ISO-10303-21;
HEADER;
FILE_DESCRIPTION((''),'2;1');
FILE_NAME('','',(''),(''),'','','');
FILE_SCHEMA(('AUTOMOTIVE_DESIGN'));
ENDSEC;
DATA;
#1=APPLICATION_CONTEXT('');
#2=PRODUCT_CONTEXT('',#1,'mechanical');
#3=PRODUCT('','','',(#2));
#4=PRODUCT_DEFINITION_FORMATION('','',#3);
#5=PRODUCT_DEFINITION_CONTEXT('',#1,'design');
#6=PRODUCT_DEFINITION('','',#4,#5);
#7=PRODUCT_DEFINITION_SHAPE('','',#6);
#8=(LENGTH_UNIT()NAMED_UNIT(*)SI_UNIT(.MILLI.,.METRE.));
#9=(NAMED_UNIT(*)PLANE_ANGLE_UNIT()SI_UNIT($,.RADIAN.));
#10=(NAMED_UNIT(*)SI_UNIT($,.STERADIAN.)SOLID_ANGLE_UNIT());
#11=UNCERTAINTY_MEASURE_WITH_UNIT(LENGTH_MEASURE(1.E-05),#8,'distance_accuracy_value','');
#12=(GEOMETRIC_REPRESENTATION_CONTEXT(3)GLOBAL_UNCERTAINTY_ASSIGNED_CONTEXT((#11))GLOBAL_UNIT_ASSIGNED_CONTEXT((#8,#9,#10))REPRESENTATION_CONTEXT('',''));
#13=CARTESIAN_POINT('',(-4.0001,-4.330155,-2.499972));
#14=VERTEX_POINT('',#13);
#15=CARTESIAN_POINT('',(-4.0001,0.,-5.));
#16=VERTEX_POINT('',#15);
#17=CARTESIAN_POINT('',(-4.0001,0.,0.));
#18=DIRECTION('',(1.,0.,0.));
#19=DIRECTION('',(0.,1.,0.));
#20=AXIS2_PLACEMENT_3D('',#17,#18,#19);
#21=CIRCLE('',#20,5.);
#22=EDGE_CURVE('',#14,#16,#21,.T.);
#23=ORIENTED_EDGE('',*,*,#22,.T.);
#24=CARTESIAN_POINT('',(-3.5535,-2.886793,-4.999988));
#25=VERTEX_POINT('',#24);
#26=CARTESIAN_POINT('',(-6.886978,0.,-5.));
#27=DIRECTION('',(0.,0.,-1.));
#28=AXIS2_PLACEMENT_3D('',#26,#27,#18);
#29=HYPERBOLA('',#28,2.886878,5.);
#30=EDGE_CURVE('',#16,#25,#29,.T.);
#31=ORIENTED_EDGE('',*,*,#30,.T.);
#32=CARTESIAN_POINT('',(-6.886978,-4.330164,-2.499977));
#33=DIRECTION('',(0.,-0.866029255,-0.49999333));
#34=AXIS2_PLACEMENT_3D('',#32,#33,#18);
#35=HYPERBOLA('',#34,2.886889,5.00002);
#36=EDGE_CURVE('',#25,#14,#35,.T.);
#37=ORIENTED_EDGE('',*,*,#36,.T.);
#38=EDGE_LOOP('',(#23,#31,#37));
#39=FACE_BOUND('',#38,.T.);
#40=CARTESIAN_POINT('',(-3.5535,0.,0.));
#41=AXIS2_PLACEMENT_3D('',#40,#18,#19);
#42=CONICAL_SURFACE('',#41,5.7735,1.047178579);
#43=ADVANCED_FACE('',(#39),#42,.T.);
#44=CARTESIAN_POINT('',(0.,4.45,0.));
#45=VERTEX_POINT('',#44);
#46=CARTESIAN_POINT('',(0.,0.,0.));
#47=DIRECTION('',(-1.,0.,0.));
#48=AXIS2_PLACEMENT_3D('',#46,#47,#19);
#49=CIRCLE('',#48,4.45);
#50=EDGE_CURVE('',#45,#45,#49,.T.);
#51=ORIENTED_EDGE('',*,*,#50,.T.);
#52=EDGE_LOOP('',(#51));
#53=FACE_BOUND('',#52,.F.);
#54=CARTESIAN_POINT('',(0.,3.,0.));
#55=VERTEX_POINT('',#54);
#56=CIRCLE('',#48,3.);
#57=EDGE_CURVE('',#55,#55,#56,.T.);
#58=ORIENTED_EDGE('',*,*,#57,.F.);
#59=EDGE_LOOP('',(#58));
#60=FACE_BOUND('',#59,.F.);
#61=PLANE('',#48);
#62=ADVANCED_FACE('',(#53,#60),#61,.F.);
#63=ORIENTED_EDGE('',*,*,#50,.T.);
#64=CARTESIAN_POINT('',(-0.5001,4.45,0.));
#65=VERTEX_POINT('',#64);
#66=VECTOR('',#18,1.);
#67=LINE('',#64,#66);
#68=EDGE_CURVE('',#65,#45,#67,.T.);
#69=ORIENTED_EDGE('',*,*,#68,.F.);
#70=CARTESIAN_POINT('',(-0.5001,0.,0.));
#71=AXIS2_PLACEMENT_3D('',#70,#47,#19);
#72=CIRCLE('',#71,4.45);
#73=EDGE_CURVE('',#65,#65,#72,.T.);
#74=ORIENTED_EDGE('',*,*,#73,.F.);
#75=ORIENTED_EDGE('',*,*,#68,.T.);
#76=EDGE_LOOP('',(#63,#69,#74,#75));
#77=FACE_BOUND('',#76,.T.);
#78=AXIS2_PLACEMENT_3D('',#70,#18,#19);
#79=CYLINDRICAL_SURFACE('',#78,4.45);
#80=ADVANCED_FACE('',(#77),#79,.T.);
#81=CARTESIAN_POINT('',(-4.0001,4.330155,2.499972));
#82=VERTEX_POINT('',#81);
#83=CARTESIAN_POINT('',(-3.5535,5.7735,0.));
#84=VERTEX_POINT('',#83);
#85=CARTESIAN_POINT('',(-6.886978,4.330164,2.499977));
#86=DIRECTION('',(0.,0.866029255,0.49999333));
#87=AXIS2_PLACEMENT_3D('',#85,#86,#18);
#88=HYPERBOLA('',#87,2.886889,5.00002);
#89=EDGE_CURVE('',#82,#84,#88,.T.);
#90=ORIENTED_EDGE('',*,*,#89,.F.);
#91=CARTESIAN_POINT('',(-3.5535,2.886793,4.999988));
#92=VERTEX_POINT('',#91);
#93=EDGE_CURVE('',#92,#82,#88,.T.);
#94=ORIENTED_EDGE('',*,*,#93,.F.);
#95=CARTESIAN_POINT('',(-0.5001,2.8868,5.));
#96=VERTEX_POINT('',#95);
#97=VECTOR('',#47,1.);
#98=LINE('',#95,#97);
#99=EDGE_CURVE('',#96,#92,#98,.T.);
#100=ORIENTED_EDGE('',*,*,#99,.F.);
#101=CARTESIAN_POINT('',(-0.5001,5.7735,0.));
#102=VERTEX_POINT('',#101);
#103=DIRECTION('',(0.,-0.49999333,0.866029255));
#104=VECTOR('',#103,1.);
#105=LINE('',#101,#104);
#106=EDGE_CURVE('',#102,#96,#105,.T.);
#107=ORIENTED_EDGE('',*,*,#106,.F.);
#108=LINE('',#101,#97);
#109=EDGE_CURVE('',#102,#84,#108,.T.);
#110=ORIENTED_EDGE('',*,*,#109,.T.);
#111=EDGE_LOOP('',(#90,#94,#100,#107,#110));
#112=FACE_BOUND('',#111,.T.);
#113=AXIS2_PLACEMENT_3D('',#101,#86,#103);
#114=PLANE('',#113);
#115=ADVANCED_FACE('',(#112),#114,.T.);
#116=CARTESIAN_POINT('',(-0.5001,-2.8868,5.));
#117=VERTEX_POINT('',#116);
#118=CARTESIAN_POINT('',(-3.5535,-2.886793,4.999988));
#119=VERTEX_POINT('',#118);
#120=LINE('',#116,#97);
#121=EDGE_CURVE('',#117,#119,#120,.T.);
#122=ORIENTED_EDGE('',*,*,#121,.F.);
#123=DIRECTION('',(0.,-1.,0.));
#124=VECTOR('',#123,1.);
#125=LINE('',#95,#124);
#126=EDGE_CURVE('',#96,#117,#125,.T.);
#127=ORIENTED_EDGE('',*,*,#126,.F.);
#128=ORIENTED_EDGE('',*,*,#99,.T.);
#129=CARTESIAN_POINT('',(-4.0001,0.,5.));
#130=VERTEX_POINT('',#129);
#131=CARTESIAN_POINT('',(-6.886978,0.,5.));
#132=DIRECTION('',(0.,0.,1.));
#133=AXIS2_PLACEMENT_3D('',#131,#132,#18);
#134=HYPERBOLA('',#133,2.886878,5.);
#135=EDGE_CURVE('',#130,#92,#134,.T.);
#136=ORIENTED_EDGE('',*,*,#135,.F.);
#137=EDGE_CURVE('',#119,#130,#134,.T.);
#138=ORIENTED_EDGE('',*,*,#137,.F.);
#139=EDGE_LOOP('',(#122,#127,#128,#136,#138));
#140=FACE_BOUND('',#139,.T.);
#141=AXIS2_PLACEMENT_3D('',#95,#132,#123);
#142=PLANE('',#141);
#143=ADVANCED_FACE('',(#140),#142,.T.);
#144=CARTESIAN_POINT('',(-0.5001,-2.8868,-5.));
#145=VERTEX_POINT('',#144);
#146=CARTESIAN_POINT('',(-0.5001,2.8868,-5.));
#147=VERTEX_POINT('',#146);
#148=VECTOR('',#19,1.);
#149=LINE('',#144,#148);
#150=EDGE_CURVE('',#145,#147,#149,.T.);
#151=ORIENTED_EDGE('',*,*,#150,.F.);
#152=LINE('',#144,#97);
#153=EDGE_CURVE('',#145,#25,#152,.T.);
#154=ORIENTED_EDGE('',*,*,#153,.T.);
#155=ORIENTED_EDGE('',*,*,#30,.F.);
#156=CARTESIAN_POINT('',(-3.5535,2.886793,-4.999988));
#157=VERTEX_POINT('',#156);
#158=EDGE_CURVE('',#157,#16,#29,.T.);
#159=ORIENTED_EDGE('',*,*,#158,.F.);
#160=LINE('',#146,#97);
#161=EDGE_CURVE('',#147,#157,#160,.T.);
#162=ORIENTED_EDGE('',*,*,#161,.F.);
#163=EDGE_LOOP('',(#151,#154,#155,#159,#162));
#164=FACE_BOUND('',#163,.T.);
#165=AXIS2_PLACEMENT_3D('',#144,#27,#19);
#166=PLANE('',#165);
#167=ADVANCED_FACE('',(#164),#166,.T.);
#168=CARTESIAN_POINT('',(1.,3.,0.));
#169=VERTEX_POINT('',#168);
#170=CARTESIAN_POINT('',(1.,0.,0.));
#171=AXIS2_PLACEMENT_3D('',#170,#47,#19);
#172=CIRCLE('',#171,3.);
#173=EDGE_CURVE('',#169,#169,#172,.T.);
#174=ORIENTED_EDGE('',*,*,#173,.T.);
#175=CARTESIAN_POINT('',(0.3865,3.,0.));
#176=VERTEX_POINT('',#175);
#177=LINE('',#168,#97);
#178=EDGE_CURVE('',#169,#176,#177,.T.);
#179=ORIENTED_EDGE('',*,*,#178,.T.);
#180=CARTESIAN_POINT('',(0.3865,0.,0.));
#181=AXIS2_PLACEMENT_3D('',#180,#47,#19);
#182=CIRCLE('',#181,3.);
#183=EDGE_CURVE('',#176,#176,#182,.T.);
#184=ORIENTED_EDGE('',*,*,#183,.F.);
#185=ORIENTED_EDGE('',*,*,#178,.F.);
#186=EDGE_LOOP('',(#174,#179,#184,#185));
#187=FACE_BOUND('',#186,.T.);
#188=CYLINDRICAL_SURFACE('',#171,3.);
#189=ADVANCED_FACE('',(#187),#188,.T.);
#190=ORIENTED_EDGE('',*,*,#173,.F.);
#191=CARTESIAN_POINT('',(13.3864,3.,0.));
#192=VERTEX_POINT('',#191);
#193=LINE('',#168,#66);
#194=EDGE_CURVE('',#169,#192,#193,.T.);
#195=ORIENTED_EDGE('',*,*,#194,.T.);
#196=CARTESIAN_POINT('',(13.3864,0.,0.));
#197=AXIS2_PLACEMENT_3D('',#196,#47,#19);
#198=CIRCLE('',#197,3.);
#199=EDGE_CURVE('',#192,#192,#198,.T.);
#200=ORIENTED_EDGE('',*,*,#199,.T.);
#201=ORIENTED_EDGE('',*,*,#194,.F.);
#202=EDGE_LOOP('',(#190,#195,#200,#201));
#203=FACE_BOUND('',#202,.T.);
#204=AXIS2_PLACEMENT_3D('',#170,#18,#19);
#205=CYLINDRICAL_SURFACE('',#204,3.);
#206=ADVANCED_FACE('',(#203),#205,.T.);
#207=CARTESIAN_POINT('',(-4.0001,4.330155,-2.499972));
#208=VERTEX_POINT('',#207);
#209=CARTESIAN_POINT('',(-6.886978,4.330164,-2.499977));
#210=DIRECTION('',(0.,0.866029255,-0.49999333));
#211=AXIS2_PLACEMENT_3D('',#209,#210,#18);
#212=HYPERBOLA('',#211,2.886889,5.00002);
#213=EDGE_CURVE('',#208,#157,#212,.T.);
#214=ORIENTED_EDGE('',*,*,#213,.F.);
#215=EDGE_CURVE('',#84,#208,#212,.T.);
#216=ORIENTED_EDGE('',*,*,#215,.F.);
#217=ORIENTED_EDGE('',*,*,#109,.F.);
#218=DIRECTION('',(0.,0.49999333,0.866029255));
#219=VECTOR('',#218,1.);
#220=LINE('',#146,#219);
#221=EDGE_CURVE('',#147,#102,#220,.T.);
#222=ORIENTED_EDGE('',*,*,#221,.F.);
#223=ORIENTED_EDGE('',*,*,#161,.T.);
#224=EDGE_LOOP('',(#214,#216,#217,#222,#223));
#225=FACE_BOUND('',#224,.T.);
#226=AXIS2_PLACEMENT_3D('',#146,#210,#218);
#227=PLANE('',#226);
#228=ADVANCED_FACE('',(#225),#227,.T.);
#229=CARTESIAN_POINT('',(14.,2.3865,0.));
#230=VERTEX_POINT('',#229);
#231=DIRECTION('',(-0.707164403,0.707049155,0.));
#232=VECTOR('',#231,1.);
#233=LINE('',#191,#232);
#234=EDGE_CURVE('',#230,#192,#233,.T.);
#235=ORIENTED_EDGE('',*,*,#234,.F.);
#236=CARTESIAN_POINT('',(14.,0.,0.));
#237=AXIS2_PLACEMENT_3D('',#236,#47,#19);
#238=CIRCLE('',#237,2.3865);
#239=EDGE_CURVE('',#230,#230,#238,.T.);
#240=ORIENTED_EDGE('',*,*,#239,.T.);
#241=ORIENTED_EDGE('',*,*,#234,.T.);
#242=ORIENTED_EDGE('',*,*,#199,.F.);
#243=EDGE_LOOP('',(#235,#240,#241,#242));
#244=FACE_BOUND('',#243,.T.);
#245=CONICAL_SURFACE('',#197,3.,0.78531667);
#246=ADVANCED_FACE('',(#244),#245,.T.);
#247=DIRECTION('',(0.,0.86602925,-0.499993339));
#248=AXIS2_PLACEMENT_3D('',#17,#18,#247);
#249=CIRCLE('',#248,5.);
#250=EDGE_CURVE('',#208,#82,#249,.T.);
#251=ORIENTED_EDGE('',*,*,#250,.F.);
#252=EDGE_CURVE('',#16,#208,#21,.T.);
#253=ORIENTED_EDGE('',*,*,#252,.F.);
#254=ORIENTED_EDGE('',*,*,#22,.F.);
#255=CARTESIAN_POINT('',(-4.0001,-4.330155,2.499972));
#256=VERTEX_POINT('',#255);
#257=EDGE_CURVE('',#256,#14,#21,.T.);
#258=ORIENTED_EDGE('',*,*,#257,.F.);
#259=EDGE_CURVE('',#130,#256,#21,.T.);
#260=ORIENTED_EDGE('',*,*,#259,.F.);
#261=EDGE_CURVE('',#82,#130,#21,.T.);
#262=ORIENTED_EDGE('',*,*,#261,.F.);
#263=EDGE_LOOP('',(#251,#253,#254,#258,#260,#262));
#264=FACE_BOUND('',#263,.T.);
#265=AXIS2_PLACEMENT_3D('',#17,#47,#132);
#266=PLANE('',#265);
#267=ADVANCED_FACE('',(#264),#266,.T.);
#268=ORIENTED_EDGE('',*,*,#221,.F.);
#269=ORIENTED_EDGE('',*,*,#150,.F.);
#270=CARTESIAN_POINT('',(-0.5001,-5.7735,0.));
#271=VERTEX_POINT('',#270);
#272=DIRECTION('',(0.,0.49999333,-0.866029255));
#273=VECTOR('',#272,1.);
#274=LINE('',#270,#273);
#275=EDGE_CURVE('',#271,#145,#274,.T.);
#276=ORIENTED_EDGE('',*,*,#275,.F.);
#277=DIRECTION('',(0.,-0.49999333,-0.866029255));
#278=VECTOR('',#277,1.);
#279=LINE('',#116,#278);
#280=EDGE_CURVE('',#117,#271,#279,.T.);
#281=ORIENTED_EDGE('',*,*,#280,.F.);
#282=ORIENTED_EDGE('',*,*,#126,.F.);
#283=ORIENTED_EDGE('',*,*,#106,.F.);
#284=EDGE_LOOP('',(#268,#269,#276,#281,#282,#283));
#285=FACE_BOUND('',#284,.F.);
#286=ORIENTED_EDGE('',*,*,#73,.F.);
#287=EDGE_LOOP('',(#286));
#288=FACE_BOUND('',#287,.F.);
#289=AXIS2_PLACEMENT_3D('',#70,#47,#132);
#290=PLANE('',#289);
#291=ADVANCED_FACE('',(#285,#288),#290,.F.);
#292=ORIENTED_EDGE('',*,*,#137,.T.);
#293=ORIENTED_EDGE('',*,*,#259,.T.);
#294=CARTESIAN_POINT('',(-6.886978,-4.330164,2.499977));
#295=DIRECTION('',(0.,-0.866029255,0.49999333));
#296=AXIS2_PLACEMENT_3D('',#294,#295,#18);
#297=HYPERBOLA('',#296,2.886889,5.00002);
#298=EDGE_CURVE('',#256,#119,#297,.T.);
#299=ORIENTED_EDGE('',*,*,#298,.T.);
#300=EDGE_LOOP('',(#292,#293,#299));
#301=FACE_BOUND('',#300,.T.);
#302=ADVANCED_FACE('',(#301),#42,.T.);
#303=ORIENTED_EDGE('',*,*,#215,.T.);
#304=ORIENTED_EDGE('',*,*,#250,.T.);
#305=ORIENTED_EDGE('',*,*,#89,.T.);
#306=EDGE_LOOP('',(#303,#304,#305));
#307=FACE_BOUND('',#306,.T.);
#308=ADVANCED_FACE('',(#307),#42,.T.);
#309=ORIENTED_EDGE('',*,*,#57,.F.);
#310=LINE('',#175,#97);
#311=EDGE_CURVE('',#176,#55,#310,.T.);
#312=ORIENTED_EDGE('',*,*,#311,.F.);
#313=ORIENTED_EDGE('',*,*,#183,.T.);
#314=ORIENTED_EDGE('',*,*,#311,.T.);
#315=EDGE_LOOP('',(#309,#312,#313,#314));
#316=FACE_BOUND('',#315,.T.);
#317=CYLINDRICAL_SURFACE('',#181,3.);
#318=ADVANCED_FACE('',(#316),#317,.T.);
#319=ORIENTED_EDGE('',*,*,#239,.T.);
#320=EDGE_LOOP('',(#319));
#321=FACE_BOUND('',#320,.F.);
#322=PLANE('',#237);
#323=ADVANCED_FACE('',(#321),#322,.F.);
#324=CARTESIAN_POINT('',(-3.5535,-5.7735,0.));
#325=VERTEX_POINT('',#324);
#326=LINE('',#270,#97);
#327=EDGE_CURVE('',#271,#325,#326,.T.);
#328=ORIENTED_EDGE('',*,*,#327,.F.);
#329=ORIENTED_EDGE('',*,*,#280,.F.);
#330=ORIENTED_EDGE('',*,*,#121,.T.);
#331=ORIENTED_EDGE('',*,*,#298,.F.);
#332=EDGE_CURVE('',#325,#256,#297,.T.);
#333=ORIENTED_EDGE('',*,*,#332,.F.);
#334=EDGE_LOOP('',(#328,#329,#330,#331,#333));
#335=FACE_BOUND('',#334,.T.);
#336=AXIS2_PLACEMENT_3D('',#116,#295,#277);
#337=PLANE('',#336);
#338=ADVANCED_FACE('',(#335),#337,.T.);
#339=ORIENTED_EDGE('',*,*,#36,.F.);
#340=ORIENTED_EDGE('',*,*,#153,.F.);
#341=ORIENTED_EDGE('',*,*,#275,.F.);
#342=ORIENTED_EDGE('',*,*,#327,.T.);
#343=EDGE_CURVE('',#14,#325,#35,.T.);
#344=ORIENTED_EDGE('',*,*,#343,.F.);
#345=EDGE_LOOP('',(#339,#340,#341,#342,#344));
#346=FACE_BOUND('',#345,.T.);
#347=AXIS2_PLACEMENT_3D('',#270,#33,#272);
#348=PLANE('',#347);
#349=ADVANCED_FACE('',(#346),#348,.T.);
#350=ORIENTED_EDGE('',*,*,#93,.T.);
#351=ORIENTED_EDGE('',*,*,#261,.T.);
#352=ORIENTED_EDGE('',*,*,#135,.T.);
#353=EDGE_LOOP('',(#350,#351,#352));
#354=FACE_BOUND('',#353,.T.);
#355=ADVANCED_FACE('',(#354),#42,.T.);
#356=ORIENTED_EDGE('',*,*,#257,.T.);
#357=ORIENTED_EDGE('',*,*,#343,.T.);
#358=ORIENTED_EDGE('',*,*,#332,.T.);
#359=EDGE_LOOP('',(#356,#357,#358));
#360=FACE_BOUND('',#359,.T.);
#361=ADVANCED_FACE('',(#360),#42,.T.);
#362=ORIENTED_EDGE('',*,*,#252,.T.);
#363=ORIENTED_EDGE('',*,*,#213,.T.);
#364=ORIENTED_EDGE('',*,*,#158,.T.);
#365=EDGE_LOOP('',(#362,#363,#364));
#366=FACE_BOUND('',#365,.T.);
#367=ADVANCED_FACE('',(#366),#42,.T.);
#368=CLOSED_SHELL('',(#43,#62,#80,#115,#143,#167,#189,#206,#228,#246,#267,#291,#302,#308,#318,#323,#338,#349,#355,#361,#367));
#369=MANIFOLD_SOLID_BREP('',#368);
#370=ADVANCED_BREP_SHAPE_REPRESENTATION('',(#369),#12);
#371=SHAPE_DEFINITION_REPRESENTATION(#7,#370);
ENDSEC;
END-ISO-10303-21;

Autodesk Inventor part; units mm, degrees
ref_plane "YZ Plane" through (0, 0, 0) normal (1, 0, 0) x (0, 1, 0)
ref_plane "XZ Plane" through (0, 0, 0) normal (0, 1, 0) x (-1, 0, 0)
sketch "草图1" plane through (0, 0, 0) normal (0, 0, 1) x (1, 0, 0)
  line L0 (0, 4.45) -> (0, 3)
  line L1 (1, 3) -> (14, 3)
  line L2 (14, 3) -> (14, 0)
  line L3 (14, 0) -> (-0.5001, 0)
  line L4 (-3.4001, 0) -> (16.9, 0) projected
  line L5 (-0.5001, 0) -> (-0.5001, 4.45)
  line L6 (-0.5001, 4.45) -> (0, 4.45)
  line L7 (1, 3) -> (0.3865, 3)
  line L8 (0.3865, 3) -> (0, 3)
  line L9 (0, -0.89) -> (0, 5.34) projected
  dimension "d0" = 14
  dimension "d1" = 13
  dimension "d2" = 6
  dimension "d9" = 0.5001
  dimension "d10" = 8.9
  dimension "d13" = 0.6136
  dimension "d14" = 6
revolve "轴承体" add sketch "草图1" angle 360 about axis through (14, 0, 0) along (-1, 0, 0)
sketch "草图2" plane through (-0.5001, 0, 0) normal (-1, 0, 0) x (0, 0, 1)
  line L0 (0, 5.7735) -> (5, 2.8868)
  line L1 (5, 2.8868) -> (5, -2.8868)
  line L2 (5, -2.8868) -> (0, -5.7735)
  line L3 (0, -5.7735) -> (-5, -2.8868)
  line L4 (-5, -2.8868) -> (-5, 2.8868)
  line L5 (-5, 2.8868) -> (0, 5.7735)
  point P0 (0, 0)
  point P1 (0, 0)
  dimension "d11" = 10
extrude "头" add sketch "草图2" along normal blind 3.5
sketch "草图4" plane through (0, 0, 0) normal (0, 0, 1) x (1, 0, 0)
  line L0 (-4.0001, 5) -> (-4.0001, 5.7735)
  line L1 (-4.0001, 5.7735) -> (-3.5535, 5.7735)
  line L2 (-3.5535, 5.7735) -> (-4.0001, 5)
  line L3 (-4.7001, 0) -> (0.1999, 0) projected
  line L4 (-0.5001, 5.7735) -> (-4.0001, 5.7735) projected
  line L5 (-4.0001, 2.8868) -> (-4.0001, 5.7735) projected
  dimension "d5" = 30
  dimension "d19" = 10
revolve "倒角1" cut sketch "草图4" angle 360 about axis through (-10, 0, 0) along (1, 0, 0)
thread "螺纹" size "M6x1" designation "M6" class "6g" standard "GB Metric profile" length 13
chamfer "倒角2" distance 0.6135 distance2 0.6136 1 edges at (14, -3, 0) measured on face at (14, 1.0659, -1.0214)
ref_plane "Work Plane1" through (1.525, 0, 0) normal (0, 0, 1) x (1, 0, 0)
equation "\"d0\" = NLG"
equation "\"d1\" = GEL"
equation "\"d2\" = GD"
equation "\"d10\" = SD2"
equation "\"d14\" = BDM"
equation "\"d11\" = SW"
equation "\"d3\" = KOH - SD"
equation "\"d5\" = ANG1"
equation "\"d19\" = SW0"
equation "\"d15\" = GEL"
equation "\"d6\" = -0.5 * SPD + 0.5 * GD"
equation "\"NLG\" = 14"
equation "\"GD\" = NND"
equation "\"BDM\" = NND"
equation "\"KOH\" = 4"
equation "\"GEL\" = 13"
equation "\"SW\" = 10"
equation "\"SW0\" = SW"
equation "\"SPD\" = NND - 1.2269 * PTC"
equation "\"SD2\" = SDH"
equation "\"SD\" = WFT"
equation "\"ANG1\" = 30deg"
equation "\"GAL\" = 0.61345 * PTC"
equation "\"GUL\" = 0.61345 * PTC"
equation "\"RR\" = 0.25"
equation "\"WFT\" = 0.5"
equation "\"GD1\" = THREADDIA - 1.2269 * PTC"
equation "\"THREADDIA\" = 6"
equation "\"SDH\" = 8.9"
equation "\"TOA\" = 30deg"
equation "\"FAWI\" = 45deg"
equation "\"PTC\" = 1"
equation "\"NND\" = 6"
equation "\"E0\" = 1.155 * SW"
properties part number "螺栓 GB/T 5783 M6 x 14" material "钢，软"
